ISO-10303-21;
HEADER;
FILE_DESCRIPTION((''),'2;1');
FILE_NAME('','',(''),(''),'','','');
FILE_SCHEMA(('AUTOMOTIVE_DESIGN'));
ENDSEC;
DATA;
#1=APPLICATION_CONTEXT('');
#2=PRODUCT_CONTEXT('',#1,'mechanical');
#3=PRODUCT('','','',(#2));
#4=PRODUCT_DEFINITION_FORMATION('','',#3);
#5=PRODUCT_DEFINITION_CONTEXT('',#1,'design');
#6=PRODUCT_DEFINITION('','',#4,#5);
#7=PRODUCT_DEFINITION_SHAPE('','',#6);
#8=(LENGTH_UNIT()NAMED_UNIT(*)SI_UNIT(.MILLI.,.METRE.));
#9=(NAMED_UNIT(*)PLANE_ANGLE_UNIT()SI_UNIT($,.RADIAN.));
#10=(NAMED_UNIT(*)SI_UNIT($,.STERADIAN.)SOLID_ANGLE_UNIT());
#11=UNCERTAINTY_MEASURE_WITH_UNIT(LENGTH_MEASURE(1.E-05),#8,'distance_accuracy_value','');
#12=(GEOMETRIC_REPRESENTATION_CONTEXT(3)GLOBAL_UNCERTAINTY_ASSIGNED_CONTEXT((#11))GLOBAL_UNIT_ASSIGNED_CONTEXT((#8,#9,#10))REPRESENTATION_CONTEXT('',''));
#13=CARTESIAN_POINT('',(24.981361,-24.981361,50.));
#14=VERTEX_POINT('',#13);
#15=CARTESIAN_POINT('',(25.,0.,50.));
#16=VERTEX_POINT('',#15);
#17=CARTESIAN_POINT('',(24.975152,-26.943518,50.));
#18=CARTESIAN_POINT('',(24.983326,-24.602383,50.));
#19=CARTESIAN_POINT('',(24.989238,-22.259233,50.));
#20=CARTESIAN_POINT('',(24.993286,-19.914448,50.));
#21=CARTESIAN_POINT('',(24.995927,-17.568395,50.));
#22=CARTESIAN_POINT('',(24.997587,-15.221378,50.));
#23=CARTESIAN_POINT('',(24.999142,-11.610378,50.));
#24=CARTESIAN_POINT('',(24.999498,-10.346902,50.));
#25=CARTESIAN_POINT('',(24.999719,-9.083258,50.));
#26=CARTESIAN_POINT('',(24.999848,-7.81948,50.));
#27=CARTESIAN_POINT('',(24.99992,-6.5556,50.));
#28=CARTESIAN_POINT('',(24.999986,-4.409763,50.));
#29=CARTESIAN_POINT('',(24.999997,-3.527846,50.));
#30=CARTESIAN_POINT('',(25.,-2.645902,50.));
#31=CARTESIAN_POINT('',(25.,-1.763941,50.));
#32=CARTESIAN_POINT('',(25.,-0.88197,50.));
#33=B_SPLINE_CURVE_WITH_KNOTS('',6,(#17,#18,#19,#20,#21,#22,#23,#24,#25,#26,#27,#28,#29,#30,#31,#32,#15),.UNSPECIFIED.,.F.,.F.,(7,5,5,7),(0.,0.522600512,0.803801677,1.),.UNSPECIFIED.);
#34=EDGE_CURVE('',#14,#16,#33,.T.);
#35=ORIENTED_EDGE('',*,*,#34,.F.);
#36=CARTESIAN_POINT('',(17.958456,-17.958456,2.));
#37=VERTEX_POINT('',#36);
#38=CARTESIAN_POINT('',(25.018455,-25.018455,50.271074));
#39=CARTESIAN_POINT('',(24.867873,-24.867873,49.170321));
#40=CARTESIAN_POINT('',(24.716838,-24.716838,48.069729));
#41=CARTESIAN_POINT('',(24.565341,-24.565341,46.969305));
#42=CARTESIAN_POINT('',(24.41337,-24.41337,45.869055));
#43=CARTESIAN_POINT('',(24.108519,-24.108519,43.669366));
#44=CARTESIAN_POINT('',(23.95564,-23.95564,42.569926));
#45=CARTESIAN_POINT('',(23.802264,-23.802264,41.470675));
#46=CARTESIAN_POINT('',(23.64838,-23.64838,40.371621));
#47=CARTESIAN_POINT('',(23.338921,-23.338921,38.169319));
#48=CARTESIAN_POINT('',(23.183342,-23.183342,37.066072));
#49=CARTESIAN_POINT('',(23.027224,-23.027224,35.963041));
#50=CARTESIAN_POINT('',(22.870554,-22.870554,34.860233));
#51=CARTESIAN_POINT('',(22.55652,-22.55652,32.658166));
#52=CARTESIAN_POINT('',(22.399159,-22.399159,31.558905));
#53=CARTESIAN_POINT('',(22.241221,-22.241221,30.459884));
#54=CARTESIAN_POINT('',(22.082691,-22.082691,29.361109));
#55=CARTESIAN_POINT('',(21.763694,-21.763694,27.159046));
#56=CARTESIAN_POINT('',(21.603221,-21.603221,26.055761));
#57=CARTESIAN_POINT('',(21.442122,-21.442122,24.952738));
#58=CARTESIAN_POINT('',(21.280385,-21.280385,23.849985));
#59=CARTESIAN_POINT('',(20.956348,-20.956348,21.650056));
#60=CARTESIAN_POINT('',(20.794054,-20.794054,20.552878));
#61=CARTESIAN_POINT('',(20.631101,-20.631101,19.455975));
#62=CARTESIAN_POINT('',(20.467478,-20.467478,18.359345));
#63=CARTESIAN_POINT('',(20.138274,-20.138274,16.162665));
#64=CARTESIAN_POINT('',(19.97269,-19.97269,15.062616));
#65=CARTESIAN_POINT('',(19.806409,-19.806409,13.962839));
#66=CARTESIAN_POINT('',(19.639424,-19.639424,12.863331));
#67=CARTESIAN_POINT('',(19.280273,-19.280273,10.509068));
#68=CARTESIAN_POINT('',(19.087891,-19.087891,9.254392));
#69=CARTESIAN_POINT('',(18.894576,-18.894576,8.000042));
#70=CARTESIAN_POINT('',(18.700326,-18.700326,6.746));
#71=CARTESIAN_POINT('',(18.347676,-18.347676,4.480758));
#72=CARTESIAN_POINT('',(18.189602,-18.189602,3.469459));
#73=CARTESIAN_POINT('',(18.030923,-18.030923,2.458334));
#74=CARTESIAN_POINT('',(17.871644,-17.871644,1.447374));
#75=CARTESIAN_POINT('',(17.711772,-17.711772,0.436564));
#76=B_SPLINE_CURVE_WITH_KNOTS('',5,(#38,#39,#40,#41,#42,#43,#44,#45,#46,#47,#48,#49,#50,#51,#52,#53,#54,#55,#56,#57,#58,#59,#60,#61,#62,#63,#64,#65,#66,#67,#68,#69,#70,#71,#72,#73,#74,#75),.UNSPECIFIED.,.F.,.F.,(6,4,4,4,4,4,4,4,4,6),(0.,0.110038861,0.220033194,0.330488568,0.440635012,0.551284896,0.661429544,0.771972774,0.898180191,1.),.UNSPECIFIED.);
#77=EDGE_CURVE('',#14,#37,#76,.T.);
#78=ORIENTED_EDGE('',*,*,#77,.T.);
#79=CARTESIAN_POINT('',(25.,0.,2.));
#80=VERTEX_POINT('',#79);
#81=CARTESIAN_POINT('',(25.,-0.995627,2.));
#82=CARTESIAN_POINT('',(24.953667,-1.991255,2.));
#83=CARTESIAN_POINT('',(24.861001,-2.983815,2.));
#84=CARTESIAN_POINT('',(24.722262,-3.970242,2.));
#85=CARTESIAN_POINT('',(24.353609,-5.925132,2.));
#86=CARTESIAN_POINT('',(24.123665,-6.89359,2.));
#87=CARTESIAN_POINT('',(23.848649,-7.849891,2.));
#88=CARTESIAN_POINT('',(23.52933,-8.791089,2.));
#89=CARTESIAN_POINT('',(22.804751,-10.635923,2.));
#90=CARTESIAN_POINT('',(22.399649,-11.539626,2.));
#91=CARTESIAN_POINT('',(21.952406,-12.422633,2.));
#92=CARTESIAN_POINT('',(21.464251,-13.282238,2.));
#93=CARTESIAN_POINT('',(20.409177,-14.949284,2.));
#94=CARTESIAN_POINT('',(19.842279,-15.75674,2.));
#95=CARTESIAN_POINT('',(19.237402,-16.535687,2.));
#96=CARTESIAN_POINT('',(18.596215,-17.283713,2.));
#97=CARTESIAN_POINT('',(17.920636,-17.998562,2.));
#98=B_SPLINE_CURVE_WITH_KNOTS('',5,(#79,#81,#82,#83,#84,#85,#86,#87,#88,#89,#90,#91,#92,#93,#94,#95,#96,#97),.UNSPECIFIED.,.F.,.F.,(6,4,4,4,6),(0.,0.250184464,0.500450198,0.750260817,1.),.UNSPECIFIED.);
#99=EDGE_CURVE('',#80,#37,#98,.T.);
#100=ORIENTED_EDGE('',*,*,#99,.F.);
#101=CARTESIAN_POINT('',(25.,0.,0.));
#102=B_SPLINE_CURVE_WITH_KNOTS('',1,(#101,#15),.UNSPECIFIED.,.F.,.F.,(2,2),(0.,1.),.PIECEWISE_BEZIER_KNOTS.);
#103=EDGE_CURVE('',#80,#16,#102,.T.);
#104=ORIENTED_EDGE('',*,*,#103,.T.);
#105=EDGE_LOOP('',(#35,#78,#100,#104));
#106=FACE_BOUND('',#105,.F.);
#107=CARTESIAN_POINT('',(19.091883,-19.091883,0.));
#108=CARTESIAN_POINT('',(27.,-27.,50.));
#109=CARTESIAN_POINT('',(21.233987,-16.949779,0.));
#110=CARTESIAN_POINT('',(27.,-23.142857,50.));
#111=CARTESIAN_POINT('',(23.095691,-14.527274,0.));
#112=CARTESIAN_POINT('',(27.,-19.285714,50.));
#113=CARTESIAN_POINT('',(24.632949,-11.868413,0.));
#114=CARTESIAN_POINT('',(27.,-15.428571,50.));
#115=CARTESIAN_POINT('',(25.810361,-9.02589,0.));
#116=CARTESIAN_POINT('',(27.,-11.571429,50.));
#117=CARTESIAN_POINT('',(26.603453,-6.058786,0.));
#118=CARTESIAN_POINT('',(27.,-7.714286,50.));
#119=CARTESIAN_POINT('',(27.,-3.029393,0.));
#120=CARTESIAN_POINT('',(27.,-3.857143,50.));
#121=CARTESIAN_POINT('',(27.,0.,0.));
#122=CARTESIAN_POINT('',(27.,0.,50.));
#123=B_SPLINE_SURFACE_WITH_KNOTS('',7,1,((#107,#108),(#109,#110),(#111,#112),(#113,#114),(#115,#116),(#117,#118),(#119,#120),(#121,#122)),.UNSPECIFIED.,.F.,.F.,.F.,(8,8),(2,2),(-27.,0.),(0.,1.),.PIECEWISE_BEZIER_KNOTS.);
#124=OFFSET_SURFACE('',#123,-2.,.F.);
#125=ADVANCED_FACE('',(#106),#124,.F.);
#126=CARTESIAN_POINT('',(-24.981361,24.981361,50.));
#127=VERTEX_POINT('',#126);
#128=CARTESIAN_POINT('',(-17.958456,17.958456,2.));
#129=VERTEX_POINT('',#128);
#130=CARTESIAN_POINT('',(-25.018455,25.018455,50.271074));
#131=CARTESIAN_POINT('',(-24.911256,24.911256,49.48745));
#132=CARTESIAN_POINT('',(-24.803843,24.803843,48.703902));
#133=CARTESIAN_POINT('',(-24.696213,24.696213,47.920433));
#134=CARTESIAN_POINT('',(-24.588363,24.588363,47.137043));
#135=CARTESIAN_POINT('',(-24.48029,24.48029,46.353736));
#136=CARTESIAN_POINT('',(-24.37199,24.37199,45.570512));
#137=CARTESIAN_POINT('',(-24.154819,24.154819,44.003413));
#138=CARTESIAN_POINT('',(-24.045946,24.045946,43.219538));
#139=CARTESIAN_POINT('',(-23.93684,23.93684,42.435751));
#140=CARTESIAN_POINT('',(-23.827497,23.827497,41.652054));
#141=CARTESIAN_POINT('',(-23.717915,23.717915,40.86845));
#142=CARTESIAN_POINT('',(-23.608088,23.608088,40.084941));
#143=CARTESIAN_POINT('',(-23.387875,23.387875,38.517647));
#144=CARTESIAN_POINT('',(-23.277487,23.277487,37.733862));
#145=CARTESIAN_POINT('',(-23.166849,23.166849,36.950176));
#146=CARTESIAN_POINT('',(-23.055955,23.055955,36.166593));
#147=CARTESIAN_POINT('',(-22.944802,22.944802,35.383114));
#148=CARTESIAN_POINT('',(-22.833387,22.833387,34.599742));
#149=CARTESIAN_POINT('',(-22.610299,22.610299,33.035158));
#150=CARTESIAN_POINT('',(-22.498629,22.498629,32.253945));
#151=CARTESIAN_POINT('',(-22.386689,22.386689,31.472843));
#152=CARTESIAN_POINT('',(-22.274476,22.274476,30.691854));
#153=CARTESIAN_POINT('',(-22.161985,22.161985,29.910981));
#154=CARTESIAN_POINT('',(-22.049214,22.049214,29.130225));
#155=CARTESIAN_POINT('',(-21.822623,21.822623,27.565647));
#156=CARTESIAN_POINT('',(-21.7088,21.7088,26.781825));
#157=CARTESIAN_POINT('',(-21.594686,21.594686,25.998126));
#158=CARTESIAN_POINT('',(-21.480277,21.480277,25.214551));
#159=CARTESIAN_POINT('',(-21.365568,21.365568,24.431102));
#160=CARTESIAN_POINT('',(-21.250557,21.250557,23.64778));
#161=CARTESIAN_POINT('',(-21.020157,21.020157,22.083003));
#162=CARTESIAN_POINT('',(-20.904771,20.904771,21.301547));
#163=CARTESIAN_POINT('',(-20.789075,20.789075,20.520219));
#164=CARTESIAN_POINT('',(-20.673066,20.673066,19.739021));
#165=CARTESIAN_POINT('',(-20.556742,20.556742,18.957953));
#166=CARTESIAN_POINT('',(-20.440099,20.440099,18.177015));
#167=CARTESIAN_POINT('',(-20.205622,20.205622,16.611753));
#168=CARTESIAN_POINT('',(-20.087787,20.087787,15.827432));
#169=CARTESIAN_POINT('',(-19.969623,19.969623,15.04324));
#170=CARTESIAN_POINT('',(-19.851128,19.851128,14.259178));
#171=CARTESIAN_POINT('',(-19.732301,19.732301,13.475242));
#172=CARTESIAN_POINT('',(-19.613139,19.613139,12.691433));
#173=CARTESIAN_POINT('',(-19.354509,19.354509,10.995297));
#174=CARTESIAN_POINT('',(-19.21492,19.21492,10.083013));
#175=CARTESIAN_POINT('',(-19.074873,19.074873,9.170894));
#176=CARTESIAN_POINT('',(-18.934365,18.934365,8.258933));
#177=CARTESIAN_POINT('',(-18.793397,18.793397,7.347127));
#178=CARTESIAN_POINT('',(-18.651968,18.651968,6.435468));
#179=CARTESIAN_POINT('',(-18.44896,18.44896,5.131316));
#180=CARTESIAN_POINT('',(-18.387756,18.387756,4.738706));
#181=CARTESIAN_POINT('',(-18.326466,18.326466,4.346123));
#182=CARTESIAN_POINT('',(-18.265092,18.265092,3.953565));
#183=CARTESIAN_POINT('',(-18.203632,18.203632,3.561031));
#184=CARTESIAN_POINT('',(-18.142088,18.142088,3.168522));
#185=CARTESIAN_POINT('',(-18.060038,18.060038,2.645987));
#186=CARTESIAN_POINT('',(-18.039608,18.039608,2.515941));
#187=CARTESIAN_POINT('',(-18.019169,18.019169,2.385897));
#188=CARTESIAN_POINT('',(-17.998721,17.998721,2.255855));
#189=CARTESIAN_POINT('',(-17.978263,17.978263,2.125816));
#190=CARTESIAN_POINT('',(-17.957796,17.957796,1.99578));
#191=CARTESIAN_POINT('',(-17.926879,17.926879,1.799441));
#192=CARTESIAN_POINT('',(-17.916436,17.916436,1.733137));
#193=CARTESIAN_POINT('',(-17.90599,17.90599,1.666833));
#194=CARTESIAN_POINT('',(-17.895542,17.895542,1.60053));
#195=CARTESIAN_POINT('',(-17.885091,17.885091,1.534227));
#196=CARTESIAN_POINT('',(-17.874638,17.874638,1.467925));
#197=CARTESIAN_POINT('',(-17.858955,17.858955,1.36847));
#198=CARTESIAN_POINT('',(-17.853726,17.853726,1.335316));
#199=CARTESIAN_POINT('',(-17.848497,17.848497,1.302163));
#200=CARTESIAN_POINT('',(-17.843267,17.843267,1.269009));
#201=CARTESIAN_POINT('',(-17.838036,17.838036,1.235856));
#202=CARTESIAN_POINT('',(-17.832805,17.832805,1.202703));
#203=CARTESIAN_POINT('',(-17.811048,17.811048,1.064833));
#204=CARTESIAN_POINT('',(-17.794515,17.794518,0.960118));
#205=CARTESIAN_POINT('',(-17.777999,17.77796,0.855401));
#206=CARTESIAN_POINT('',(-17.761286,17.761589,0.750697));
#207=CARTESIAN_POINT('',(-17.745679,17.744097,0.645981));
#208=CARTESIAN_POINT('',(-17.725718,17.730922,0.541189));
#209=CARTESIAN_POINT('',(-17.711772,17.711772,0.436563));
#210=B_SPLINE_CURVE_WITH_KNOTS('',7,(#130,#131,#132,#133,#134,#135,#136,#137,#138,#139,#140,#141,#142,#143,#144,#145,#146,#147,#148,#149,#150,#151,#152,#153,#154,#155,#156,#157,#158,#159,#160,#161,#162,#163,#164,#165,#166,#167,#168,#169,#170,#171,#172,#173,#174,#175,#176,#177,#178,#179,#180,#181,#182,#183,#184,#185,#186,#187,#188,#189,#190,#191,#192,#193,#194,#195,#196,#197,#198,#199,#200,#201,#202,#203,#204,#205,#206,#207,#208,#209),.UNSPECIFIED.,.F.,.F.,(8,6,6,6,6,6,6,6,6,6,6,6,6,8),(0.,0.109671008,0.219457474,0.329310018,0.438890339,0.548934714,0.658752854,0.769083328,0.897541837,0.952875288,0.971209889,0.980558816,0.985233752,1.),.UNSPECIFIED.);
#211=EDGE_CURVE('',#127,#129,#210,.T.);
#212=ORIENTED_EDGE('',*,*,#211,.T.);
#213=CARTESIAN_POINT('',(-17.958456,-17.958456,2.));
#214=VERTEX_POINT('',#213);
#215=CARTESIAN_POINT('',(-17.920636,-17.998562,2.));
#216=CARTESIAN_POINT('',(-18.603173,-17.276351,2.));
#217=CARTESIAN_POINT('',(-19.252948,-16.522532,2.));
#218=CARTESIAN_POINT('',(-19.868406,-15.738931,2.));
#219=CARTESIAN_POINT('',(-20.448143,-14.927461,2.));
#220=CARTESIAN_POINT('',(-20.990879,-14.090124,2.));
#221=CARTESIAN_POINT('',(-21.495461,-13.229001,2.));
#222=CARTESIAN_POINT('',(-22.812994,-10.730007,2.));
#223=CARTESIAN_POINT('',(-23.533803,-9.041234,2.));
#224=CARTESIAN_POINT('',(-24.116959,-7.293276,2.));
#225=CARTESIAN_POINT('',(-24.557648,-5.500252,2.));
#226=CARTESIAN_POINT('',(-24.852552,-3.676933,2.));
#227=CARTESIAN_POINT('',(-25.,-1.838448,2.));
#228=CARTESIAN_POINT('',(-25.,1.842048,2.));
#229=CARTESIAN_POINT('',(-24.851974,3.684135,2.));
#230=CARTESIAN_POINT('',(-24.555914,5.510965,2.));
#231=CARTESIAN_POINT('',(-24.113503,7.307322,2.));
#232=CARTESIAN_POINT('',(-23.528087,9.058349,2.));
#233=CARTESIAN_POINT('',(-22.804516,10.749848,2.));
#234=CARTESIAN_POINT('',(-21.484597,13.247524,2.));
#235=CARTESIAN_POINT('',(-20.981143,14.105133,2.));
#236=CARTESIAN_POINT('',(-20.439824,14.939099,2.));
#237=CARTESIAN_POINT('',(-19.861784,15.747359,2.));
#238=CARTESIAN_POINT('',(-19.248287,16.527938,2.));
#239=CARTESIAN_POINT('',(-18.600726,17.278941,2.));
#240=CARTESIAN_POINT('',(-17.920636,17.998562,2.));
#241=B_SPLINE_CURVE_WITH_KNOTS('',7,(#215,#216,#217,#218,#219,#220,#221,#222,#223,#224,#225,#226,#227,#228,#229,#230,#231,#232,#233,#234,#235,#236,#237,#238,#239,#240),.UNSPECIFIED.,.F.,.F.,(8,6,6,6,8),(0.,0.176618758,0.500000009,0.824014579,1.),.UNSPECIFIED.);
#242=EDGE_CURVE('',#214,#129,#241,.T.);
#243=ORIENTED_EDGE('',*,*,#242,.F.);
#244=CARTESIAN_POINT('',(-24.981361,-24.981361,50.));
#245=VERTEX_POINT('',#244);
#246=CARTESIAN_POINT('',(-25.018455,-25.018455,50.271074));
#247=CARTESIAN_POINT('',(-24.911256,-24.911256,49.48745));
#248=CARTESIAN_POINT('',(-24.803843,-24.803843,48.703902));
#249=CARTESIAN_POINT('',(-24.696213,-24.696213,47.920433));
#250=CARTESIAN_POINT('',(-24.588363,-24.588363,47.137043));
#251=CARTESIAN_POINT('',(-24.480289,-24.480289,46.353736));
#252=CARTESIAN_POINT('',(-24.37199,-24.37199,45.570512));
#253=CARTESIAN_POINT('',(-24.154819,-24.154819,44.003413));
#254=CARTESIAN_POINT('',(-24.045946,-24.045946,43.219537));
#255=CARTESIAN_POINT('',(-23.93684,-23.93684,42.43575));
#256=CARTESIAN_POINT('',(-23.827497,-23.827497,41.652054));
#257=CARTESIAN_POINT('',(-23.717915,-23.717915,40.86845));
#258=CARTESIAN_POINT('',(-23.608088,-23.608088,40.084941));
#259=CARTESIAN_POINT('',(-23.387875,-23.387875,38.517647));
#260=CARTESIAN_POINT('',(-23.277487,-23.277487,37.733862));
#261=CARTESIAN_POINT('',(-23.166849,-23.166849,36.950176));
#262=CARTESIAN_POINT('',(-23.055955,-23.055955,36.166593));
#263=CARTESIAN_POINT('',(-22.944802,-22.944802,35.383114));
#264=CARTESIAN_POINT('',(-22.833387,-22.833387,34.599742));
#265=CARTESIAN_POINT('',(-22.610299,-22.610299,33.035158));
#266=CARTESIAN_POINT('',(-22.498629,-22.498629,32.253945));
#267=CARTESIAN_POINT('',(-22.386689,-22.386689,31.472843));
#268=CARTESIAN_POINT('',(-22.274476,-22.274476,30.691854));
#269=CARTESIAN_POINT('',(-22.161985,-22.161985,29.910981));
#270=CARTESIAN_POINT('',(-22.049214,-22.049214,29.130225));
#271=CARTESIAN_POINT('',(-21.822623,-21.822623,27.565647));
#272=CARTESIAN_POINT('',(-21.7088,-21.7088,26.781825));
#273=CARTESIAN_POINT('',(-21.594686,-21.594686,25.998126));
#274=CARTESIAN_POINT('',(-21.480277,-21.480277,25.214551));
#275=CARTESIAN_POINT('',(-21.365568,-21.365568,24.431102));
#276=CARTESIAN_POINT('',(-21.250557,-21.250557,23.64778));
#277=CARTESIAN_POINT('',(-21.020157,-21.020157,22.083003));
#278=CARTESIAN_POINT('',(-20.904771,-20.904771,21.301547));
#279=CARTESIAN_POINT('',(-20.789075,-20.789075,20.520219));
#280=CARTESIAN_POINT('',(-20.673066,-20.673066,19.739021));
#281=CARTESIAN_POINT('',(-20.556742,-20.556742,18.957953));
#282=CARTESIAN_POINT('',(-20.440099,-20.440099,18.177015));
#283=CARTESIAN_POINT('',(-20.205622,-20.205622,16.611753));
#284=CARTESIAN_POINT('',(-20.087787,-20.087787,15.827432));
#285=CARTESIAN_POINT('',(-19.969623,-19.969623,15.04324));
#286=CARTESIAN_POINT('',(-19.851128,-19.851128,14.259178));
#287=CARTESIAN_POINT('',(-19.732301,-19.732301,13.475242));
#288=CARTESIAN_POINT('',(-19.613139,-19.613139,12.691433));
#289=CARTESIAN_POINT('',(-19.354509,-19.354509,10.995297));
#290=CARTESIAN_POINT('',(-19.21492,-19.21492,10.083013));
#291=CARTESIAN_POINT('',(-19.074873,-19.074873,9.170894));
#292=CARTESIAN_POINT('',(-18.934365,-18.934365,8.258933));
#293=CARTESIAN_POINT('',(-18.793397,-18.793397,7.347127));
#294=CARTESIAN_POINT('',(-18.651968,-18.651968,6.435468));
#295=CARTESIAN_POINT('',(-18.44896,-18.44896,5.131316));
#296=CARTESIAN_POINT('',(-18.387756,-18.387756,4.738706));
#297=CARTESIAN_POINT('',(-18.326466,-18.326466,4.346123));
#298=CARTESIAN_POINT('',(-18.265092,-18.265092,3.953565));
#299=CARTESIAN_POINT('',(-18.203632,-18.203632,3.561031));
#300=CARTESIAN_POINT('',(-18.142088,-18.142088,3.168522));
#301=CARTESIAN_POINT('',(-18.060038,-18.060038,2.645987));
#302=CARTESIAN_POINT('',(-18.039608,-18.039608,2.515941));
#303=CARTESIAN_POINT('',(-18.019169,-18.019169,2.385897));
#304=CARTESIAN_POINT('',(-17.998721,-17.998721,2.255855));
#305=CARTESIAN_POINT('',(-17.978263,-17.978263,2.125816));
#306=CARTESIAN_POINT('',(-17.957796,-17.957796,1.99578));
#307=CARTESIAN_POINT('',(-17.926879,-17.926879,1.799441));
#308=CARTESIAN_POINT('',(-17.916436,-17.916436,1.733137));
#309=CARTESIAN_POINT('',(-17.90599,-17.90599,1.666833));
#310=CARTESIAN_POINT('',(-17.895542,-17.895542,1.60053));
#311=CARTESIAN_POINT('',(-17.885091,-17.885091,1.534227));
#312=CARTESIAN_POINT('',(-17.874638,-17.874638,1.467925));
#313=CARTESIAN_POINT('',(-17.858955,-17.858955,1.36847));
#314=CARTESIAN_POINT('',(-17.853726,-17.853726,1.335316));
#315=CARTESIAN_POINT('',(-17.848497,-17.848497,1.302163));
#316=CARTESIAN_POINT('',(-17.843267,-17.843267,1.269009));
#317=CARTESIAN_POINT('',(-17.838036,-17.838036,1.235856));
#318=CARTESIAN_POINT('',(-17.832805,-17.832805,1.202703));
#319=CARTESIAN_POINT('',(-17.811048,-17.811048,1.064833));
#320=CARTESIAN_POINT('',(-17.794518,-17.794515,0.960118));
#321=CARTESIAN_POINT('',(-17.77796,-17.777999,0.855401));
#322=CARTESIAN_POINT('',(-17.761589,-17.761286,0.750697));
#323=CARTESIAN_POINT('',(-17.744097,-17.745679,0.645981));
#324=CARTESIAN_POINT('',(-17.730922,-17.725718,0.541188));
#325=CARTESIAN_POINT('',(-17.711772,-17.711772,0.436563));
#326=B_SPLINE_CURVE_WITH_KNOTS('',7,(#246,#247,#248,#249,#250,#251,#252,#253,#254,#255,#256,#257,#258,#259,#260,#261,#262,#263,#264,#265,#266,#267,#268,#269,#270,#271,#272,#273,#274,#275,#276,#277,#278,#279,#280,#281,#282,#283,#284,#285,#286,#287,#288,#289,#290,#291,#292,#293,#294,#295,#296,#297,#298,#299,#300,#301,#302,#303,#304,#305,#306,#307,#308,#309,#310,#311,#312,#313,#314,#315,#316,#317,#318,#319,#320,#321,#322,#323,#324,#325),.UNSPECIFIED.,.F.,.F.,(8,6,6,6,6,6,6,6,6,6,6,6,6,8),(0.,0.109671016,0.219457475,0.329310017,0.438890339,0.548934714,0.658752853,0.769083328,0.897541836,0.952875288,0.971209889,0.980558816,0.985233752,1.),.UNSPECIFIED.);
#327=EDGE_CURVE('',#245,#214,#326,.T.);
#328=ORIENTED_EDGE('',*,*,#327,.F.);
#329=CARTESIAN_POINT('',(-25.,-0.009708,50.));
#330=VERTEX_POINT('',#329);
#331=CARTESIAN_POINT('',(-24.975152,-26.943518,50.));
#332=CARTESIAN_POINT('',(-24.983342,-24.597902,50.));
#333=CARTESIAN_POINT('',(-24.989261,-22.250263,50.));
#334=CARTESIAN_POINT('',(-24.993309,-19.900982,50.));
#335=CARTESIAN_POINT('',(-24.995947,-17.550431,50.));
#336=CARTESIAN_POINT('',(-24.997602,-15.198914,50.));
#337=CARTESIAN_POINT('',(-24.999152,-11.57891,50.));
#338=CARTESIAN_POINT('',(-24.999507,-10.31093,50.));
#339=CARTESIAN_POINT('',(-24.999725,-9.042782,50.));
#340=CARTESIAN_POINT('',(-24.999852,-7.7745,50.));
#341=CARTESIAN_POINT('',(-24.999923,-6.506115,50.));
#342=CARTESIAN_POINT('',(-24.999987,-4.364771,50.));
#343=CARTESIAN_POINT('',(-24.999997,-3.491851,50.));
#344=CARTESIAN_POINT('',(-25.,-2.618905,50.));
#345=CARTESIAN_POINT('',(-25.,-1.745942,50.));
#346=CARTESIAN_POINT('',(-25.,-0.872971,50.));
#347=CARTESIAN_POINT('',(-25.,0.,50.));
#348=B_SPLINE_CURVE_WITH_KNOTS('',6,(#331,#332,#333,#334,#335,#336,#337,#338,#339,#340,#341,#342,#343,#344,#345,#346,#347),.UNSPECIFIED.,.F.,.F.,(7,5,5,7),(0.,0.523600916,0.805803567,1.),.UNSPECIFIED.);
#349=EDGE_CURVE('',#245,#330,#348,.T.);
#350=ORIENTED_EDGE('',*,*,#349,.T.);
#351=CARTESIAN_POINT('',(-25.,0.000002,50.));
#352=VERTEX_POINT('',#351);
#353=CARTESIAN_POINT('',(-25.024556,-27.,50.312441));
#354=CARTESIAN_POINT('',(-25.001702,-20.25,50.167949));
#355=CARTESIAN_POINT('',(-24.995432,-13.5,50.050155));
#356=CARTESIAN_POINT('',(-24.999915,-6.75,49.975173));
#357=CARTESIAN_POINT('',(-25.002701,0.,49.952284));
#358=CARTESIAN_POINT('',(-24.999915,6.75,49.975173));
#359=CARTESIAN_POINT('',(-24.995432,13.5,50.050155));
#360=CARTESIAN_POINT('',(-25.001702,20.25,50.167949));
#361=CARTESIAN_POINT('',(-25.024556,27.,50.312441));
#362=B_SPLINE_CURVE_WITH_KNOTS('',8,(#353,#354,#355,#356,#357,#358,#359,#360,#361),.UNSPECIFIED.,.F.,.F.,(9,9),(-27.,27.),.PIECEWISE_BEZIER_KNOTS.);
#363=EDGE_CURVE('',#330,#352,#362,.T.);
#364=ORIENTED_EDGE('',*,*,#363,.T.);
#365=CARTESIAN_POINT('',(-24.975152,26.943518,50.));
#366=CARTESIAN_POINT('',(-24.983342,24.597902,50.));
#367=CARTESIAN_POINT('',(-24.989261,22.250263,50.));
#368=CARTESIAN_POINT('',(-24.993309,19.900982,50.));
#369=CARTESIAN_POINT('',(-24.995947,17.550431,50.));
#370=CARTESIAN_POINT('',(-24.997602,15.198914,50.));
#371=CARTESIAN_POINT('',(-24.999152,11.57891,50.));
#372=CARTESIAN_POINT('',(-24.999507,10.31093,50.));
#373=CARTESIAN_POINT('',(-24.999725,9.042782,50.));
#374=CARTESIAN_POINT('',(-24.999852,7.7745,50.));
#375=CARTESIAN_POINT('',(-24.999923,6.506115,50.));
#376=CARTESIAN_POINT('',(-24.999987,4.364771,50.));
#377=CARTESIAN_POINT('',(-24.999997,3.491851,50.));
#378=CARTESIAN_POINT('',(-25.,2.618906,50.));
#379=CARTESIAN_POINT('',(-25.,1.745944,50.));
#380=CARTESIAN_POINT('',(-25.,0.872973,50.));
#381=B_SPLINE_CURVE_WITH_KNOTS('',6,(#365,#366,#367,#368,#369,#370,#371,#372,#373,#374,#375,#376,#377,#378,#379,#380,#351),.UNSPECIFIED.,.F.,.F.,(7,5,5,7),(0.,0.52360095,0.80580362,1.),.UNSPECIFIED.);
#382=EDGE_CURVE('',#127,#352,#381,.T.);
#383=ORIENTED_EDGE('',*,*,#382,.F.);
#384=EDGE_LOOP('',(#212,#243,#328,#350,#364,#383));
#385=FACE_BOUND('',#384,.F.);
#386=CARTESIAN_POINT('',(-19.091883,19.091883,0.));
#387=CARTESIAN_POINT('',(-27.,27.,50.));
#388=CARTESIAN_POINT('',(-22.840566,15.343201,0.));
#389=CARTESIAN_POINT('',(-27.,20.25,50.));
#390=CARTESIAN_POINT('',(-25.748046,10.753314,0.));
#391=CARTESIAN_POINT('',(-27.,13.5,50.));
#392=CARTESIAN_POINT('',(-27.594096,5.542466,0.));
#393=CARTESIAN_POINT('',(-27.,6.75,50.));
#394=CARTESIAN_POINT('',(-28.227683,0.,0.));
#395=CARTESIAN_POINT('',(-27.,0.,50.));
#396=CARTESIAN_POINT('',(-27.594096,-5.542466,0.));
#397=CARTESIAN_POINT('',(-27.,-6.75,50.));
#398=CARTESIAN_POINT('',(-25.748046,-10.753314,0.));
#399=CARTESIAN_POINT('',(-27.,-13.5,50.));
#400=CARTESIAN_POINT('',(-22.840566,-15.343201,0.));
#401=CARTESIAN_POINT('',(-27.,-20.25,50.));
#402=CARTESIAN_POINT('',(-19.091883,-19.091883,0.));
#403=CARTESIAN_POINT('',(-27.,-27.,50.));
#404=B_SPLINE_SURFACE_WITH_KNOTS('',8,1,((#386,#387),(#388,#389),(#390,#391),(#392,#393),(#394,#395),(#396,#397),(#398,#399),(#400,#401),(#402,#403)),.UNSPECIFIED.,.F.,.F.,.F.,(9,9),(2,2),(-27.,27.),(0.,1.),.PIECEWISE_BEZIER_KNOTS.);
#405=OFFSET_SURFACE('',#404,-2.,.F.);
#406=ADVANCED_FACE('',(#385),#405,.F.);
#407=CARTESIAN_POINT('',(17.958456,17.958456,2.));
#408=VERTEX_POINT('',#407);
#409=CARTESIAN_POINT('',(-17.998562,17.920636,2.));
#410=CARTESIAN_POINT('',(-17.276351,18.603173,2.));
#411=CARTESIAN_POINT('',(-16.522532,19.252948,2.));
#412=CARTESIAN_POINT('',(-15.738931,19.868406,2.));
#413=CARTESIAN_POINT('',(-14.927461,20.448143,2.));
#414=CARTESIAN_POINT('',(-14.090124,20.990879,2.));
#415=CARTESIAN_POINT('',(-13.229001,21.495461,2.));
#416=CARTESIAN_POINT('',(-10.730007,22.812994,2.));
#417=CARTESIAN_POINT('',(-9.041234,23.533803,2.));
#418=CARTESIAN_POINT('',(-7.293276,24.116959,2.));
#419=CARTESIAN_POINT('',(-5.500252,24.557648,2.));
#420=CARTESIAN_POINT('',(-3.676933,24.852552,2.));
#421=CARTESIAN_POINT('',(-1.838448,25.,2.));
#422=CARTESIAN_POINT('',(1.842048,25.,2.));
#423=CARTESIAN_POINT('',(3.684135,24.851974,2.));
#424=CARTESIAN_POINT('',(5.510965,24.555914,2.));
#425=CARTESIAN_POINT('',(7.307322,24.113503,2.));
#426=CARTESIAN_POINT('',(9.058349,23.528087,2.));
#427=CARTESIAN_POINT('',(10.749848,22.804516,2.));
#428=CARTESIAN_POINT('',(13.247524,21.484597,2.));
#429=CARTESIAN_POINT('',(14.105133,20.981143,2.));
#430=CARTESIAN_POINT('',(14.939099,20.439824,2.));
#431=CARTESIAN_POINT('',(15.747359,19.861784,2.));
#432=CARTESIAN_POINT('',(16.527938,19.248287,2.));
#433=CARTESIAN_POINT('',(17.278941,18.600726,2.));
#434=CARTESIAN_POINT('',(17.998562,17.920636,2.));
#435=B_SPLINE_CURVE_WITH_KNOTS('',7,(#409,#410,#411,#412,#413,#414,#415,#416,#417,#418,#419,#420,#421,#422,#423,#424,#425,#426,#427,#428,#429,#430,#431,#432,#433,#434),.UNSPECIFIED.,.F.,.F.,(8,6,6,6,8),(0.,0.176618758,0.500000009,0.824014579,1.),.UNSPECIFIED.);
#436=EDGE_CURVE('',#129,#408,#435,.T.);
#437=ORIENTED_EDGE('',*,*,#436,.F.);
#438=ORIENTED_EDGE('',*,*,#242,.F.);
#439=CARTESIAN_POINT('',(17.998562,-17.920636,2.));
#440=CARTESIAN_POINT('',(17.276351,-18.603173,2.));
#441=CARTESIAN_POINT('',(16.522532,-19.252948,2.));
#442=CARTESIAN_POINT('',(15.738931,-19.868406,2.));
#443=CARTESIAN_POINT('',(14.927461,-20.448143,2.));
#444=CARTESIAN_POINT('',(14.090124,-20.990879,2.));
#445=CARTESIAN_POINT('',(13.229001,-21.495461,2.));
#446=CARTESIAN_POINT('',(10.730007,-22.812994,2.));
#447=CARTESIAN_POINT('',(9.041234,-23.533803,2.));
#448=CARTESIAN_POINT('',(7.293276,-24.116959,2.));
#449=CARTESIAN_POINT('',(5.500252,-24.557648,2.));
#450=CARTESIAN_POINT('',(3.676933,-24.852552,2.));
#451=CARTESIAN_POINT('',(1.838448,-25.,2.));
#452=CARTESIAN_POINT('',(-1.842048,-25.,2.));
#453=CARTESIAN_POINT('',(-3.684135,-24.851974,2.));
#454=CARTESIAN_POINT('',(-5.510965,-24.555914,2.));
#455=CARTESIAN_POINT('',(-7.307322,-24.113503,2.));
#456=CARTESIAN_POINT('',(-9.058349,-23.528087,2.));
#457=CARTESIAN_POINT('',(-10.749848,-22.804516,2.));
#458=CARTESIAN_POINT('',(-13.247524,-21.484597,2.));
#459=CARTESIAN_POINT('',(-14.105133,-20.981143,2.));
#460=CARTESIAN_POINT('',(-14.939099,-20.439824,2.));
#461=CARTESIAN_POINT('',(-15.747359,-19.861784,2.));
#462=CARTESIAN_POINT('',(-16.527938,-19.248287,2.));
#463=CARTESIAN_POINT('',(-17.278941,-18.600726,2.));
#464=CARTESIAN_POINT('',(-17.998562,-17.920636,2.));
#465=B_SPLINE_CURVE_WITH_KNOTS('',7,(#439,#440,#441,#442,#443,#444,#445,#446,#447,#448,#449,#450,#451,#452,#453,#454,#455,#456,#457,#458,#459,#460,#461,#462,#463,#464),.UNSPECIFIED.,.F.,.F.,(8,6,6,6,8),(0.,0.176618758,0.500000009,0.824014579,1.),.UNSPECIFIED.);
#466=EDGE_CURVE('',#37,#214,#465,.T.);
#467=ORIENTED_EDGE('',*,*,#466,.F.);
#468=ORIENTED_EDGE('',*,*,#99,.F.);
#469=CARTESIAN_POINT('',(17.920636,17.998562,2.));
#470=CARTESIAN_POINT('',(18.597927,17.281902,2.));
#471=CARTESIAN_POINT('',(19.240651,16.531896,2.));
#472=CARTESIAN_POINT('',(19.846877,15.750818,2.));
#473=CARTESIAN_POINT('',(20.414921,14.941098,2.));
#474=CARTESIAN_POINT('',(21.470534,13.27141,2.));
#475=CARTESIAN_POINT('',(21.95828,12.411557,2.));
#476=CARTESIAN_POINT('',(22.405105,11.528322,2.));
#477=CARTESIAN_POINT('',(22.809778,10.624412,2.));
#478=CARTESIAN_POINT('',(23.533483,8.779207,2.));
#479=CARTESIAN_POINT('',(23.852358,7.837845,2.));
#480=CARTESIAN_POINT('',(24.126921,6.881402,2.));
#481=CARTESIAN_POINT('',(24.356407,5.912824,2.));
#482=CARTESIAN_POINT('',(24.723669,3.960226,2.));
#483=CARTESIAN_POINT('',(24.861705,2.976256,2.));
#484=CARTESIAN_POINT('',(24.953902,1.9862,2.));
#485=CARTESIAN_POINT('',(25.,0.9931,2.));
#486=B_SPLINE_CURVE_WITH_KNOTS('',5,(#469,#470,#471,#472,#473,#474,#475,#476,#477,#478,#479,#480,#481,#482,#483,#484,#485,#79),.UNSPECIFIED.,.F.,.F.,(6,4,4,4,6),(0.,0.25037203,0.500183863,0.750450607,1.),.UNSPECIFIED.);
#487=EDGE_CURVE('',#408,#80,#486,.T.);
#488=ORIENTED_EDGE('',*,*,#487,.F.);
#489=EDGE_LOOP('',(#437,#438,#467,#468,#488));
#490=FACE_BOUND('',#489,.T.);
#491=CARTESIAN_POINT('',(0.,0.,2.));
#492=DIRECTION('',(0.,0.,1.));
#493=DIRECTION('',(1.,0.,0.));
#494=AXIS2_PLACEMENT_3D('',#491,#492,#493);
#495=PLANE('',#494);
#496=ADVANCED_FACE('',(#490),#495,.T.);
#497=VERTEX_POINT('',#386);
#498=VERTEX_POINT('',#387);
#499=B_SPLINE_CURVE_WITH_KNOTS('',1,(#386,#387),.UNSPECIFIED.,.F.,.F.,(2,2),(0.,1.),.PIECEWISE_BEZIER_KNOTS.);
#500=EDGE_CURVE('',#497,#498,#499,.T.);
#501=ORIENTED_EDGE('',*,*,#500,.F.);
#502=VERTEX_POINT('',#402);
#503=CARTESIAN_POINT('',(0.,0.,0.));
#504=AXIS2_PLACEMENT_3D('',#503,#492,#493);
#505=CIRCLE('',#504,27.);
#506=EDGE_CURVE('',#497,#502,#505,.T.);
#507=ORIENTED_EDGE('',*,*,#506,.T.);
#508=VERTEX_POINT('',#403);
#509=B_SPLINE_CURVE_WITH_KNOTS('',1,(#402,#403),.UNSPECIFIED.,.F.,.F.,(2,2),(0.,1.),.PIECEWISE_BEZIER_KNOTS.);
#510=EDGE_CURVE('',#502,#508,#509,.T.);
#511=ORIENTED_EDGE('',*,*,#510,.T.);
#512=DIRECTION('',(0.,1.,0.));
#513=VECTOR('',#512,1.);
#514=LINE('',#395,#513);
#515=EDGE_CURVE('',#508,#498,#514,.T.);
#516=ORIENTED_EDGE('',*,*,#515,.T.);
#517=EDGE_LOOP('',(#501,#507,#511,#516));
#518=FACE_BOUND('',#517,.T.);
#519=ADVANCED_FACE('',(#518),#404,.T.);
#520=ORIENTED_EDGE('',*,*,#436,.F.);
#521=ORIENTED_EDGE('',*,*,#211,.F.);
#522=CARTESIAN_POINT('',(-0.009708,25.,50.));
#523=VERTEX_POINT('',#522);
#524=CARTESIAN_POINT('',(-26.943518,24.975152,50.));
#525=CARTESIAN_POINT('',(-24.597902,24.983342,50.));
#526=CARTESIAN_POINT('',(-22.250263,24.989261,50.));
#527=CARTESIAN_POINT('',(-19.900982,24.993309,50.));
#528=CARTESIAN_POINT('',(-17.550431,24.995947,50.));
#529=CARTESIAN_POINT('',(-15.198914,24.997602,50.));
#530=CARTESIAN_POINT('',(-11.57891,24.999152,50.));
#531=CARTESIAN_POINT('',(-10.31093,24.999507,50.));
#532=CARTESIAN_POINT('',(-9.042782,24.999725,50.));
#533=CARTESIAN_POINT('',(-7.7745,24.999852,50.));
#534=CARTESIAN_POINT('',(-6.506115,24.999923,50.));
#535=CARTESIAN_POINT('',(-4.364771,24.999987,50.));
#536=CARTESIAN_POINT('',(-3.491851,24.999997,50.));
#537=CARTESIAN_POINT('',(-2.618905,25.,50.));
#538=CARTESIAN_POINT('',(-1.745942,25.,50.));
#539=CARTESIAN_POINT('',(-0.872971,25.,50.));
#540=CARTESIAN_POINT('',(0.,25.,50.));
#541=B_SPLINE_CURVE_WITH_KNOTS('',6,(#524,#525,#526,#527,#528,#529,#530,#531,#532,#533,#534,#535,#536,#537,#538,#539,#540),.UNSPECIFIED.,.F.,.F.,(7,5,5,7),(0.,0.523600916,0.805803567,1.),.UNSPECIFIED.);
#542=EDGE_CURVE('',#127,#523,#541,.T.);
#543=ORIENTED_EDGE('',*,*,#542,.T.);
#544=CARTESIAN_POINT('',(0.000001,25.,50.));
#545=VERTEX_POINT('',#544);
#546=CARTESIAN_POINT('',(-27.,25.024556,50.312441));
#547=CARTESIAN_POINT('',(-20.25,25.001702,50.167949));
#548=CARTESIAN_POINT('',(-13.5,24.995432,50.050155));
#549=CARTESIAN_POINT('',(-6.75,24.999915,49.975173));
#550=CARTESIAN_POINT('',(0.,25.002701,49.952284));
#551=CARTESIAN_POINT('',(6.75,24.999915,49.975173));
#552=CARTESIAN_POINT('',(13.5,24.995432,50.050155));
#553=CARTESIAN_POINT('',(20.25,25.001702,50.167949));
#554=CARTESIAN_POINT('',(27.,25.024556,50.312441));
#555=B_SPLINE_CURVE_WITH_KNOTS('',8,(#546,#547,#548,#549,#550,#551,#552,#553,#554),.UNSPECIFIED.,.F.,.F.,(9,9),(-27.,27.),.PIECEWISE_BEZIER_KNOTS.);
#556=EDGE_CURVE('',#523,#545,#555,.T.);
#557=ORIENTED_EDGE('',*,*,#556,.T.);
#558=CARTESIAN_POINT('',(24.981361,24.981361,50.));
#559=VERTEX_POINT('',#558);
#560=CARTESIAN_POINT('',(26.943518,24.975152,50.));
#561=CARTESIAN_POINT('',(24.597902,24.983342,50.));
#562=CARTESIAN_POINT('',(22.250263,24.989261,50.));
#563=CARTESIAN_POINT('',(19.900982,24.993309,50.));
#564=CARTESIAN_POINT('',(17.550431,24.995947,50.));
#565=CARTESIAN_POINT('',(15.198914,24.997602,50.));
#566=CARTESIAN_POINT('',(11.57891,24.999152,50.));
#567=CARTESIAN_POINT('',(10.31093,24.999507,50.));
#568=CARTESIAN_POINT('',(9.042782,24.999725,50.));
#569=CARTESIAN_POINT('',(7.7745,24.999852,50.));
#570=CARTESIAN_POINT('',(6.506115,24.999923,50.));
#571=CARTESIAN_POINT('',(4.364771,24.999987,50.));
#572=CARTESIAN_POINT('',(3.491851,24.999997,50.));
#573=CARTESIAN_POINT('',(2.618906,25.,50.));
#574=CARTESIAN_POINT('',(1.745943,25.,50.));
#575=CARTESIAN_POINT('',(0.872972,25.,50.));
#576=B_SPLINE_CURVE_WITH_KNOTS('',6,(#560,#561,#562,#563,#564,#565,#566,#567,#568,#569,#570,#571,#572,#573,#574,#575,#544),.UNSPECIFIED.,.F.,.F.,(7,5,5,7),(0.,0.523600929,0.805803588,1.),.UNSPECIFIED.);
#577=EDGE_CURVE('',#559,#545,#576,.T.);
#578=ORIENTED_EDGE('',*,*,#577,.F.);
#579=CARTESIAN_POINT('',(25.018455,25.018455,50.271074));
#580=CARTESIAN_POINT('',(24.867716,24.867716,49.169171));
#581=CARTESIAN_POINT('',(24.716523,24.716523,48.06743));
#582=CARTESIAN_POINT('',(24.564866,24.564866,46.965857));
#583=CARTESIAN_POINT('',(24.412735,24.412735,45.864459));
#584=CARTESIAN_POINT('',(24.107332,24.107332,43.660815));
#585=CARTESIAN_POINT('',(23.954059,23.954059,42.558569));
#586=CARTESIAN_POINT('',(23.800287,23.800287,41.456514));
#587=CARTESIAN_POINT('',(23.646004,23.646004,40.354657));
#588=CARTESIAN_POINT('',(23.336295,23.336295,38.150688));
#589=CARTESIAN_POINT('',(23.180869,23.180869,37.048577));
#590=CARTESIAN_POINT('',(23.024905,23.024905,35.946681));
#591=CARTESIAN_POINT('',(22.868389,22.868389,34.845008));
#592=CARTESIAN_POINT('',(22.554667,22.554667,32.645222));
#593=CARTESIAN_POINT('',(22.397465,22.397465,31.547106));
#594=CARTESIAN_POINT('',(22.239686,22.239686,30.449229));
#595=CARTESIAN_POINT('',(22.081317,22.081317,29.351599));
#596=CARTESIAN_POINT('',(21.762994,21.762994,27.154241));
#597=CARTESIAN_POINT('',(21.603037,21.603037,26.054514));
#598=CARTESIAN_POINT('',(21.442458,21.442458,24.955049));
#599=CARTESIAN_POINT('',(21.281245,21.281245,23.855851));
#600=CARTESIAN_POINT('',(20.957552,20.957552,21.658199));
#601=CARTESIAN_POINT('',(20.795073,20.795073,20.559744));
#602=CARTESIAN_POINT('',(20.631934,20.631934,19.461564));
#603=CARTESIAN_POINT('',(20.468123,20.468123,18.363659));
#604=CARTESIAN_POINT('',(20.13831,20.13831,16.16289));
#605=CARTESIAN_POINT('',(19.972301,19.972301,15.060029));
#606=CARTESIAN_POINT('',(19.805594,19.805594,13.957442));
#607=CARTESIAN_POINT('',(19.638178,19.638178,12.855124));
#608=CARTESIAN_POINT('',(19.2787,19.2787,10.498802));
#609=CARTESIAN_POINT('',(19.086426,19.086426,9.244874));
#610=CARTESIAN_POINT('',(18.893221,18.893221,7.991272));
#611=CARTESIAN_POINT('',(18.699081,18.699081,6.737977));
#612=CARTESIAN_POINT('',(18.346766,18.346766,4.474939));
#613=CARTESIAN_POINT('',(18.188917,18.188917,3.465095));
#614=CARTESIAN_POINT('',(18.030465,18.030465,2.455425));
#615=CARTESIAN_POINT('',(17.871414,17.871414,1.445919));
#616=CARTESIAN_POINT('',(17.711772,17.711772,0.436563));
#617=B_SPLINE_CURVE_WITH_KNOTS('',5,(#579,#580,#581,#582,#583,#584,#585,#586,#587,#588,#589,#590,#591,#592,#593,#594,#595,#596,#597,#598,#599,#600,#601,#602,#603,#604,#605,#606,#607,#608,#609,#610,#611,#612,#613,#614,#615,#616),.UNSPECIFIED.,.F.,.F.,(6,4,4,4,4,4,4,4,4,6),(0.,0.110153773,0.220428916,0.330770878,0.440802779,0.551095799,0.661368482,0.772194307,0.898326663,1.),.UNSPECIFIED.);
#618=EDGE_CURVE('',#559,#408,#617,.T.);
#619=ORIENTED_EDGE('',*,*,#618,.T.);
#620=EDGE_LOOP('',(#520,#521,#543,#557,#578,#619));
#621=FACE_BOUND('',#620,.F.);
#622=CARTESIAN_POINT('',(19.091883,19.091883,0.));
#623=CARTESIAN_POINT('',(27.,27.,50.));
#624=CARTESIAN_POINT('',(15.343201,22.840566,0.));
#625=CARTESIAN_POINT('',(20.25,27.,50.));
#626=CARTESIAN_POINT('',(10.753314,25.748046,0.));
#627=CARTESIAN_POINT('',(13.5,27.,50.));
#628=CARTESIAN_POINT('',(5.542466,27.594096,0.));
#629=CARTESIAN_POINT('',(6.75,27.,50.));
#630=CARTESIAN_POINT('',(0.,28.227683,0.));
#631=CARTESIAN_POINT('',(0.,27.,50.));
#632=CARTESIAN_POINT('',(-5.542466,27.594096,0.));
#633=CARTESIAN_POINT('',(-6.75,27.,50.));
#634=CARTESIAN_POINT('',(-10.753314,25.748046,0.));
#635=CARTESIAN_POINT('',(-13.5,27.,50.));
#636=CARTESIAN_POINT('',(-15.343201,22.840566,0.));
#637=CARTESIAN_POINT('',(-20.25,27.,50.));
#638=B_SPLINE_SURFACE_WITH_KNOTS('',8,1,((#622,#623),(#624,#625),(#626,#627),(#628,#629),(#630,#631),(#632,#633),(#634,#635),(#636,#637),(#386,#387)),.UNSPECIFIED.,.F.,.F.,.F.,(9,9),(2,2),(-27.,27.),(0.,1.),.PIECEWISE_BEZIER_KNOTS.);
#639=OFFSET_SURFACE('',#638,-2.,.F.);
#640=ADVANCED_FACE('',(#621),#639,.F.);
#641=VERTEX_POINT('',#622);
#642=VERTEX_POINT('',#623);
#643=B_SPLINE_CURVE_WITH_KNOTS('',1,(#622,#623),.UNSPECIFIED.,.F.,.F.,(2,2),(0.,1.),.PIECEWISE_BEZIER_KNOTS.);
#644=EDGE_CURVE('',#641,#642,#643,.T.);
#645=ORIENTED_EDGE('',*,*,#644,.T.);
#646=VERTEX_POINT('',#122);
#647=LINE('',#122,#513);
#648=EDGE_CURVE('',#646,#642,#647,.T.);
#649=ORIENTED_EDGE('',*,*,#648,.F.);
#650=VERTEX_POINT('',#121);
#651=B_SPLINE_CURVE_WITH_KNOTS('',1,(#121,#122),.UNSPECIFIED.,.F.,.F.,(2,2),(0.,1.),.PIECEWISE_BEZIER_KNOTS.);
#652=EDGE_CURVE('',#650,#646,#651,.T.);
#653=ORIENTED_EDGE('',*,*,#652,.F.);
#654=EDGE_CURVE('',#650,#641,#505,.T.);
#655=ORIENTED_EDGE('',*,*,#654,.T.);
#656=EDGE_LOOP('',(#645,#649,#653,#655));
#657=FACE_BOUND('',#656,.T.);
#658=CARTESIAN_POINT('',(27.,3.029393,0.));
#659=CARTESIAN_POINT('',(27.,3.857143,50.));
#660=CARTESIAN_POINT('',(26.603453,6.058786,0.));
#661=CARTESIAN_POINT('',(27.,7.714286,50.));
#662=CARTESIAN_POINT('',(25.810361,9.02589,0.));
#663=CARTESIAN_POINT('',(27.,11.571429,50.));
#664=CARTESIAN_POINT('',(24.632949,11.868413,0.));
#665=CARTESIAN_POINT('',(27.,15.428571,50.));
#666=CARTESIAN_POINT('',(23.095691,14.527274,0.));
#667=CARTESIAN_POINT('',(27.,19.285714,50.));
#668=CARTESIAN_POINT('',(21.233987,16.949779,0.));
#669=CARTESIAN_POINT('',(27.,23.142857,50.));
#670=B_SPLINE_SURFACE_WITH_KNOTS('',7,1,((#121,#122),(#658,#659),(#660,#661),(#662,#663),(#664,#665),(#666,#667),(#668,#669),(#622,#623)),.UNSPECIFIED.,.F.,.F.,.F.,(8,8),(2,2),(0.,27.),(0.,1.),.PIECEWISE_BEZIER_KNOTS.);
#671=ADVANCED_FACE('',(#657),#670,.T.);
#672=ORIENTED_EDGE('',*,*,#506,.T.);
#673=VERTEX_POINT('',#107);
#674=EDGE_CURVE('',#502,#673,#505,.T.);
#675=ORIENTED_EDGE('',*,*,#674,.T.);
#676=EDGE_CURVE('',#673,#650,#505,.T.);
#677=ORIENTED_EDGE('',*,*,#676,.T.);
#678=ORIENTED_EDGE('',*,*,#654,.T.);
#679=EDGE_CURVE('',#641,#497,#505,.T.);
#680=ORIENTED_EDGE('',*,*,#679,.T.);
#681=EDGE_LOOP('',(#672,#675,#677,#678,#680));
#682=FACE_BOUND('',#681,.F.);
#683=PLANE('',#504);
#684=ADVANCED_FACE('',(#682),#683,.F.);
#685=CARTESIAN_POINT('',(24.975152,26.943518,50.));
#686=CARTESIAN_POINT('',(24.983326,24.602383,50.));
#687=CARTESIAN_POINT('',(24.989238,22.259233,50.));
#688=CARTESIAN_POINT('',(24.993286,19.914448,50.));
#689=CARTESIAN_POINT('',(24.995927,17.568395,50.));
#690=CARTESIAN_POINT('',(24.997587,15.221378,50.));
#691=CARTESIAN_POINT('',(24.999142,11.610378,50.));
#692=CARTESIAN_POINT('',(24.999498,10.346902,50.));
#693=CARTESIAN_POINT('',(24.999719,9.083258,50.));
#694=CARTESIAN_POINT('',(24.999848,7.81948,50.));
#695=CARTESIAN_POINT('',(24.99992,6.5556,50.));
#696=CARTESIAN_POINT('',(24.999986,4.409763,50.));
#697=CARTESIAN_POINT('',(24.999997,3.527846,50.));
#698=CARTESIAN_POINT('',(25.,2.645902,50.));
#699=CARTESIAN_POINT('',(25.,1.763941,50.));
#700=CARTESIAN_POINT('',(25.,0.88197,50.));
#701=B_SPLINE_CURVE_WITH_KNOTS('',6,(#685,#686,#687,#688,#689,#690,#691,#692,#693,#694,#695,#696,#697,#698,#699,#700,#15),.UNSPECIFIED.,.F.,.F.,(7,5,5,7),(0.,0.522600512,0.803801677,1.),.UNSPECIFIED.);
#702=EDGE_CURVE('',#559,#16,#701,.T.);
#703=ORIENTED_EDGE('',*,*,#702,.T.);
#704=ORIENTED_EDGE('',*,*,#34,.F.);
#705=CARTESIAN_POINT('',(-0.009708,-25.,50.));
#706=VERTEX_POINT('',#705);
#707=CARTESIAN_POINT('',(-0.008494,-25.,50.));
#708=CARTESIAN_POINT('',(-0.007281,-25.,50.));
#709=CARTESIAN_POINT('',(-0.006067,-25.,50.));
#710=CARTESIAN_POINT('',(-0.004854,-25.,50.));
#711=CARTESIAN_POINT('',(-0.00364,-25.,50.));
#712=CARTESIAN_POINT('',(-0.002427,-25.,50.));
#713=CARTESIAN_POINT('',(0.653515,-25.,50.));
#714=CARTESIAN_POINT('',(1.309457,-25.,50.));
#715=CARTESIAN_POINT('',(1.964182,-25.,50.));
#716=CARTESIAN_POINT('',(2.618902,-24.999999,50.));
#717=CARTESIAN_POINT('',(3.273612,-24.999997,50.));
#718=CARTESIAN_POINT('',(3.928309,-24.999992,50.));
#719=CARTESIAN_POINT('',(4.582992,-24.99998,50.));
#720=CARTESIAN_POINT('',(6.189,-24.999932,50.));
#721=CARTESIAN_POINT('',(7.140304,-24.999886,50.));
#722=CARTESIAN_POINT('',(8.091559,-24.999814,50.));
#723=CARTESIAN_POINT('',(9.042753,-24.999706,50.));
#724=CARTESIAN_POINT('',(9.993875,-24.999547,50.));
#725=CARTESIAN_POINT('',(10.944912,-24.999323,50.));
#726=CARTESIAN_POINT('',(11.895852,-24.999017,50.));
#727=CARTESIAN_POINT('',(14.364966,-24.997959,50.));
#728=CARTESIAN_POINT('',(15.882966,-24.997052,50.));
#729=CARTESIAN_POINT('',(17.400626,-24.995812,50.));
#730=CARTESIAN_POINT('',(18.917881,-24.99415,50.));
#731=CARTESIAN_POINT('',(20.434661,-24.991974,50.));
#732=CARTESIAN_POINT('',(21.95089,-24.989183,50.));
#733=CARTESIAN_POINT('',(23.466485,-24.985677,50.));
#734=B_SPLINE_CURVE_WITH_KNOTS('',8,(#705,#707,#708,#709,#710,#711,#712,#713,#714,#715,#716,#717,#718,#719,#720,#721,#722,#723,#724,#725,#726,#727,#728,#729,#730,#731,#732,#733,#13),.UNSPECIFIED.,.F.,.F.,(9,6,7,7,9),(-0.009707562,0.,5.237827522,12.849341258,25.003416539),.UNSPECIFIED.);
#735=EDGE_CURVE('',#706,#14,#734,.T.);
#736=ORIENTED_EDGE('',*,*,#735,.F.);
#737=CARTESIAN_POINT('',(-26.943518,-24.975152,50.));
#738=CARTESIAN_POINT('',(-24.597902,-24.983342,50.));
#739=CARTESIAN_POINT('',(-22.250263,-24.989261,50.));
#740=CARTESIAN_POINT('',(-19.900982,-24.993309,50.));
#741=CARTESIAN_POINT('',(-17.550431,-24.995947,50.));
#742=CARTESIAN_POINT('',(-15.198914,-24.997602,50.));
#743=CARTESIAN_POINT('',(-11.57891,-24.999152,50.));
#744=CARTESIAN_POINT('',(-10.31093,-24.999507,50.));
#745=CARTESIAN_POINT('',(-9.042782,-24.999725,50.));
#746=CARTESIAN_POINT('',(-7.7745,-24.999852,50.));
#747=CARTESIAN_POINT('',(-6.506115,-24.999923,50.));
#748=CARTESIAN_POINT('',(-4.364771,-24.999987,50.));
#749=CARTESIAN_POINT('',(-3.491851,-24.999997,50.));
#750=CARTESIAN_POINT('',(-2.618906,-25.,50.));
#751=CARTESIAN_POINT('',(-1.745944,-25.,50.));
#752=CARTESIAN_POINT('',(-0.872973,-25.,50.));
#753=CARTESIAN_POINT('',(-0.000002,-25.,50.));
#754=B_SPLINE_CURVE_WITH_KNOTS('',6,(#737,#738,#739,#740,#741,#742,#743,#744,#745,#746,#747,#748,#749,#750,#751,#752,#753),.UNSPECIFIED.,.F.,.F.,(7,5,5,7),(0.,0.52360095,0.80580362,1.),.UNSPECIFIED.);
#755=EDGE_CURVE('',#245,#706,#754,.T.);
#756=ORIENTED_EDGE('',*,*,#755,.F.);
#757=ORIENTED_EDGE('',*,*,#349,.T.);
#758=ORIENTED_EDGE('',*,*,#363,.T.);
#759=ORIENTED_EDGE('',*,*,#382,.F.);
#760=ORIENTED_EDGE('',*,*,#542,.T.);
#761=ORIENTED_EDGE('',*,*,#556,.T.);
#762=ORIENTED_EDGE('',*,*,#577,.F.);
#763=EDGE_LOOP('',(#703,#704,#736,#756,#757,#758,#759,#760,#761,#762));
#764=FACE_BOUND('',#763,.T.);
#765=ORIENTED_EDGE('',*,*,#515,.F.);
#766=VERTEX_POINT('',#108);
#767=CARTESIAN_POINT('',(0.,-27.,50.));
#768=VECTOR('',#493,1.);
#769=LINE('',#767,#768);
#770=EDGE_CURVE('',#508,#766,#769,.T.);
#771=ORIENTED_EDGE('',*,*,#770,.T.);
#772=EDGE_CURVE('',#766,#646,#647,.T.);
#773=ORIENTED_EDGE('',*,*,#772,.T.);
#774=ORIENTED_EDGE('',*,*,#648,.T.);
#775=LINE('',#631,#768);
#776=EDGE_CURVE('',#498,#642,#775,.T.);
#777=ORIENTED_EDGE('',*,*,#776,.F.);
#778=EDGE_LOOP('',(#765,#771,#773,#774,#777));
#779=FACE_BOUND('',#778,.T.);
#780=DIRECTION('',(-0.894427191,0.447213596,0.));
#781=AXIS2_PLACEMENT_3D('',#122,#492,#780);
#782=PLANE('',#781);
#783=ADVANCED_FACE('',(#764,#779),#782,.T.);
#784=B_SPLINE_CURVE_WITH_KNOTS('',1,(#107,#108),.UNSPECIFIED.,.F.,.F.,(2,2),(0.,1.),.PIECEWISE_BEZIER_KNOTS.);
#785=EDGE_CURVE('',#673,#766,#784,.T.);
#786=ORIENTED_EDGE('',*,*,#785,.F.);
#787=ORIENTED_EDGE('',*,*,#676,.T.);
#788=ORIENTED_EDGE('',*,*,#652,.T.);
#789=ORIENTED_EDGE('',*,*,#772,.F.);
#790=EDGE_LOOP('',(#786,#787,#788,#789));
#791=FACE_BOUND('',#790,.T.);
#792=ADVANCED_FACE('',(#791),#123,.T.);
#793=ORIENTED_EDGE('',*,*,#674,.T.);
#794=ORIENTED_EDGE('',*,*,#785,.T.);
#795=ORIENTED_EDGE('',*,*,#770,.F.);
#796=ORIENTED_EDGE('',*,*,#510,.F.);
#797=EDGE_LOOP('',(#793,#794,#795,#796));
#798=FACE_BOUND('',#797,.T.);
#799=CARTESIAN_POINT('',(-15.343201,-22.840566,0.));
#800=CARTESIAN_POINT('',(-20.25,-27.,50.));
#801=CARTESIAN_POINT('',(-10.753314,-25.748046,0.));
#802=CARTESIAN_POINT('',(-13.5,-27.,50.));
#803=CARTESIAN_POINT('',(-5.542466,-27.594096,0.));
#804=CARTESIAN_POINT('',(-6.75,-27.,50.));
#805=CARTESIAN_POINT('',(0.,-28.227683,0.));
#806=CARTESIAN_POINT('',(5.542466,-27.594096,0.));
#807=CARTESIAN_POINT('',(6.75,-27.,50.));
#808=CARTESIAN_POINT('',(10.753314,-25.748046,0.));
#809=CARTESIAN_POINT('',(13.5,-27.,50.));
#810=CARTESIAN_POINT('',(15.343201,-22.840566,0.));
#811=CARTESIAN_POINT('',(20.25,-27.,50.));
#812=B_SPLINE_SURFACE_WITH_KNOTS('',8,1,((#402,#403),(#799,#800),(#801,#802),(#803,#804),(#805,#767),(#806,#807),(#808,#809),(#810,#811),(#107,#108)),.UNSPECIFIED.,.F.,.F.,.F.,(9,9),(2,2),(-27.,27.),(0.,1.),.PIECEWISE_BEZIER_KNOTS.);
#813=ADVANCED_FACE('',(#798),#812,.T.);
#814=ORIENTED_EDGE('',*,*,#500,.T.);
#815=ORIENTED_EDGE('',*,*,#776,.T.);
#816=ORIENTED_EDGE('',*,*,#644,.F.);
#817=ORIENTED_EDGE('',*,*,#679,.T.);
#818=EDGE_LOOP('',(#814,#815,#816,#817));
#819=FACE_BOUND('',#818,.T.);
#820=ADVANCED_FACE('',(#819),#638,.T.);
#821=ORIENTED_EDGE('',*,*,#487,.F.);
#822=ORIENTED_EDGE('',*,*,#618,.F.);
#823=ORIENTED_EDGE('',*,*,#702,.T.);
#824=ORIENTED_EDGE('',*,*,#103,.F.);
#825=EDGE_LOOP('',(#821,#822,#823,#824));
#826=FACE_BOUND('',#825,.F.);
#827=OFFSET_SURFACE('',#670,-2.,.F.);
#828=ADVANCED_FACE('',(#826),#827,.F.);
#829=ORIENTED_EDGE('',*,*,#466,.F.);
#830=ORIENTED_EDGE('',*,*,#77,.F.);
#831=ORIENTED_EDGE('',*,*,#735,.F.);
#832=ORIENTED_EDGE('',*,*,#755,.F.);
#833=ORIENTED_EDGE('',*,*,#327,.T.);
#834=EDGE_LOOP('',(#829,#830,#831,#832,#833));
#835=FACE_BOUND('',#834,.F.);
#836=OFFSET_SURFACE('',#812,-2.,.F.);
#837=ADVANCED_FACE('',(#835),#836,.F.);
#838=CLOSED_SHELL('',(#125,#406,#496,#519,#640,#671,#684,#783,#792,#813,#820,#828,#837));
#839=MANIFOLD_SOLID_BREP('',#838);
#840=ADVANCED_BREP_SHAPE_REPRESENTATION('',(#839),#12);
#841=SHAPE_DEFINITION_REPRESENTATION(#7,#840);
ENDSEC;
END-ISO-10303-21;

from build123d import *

# Parameters (mm, degrees)
F0_R = 27
F2_W = 54
F2_H = 54
F4_T = 2


# Not quite as in the source:
# - a shell that OpenCascade refuses in one call is made with other operations: the cavity is built on its own and cut out


with BuildPart() as f3:
    # F0 (on Top) → F3 section 0
    with BuildSketch(Plane.XY):
        Circle(F0_R)
    # F2 (on offset) → F3 section 1
    with BuildSketch(Plane.XY.offset(50)):
        Rectangle(F2_W, F2_H)
    loft()

    # F4: shell of thickness 2, made by hand


with BuildPart() as f4_core1:
    # F4_t2: copy of F3
    add(f3.part)

    # the walls: a layer under each face that stays
    f4_faces = [f4_core1.faces().sort_by_distance(p)[0] for p in [
        (25.9723736862, 11.9162263358, 25),
        (0, 26.999999999, 25),
        (-26.999999999, 0, 25),
        (0, -26.999999999, 25),
        (25.9723736862, -11.9162263358, 25),
        (0, 0, 0),
    ]]
    thicken(f4_faces, amount=-F4_T, mode=Mode.SUBTRACT)


with BuildPart() as f3_1:
    add(f3.part)

    # what is left inside the walls is the cavity
    f4_cavity = [f4_core1.part.solids().sort_by_distance(p)[0] for p in [
        (4.996272, 9.992544, 49.98),
    ]]
    add(f4_cavity, mode=Mode.SUBTRACT)


solid = f3_1.part
